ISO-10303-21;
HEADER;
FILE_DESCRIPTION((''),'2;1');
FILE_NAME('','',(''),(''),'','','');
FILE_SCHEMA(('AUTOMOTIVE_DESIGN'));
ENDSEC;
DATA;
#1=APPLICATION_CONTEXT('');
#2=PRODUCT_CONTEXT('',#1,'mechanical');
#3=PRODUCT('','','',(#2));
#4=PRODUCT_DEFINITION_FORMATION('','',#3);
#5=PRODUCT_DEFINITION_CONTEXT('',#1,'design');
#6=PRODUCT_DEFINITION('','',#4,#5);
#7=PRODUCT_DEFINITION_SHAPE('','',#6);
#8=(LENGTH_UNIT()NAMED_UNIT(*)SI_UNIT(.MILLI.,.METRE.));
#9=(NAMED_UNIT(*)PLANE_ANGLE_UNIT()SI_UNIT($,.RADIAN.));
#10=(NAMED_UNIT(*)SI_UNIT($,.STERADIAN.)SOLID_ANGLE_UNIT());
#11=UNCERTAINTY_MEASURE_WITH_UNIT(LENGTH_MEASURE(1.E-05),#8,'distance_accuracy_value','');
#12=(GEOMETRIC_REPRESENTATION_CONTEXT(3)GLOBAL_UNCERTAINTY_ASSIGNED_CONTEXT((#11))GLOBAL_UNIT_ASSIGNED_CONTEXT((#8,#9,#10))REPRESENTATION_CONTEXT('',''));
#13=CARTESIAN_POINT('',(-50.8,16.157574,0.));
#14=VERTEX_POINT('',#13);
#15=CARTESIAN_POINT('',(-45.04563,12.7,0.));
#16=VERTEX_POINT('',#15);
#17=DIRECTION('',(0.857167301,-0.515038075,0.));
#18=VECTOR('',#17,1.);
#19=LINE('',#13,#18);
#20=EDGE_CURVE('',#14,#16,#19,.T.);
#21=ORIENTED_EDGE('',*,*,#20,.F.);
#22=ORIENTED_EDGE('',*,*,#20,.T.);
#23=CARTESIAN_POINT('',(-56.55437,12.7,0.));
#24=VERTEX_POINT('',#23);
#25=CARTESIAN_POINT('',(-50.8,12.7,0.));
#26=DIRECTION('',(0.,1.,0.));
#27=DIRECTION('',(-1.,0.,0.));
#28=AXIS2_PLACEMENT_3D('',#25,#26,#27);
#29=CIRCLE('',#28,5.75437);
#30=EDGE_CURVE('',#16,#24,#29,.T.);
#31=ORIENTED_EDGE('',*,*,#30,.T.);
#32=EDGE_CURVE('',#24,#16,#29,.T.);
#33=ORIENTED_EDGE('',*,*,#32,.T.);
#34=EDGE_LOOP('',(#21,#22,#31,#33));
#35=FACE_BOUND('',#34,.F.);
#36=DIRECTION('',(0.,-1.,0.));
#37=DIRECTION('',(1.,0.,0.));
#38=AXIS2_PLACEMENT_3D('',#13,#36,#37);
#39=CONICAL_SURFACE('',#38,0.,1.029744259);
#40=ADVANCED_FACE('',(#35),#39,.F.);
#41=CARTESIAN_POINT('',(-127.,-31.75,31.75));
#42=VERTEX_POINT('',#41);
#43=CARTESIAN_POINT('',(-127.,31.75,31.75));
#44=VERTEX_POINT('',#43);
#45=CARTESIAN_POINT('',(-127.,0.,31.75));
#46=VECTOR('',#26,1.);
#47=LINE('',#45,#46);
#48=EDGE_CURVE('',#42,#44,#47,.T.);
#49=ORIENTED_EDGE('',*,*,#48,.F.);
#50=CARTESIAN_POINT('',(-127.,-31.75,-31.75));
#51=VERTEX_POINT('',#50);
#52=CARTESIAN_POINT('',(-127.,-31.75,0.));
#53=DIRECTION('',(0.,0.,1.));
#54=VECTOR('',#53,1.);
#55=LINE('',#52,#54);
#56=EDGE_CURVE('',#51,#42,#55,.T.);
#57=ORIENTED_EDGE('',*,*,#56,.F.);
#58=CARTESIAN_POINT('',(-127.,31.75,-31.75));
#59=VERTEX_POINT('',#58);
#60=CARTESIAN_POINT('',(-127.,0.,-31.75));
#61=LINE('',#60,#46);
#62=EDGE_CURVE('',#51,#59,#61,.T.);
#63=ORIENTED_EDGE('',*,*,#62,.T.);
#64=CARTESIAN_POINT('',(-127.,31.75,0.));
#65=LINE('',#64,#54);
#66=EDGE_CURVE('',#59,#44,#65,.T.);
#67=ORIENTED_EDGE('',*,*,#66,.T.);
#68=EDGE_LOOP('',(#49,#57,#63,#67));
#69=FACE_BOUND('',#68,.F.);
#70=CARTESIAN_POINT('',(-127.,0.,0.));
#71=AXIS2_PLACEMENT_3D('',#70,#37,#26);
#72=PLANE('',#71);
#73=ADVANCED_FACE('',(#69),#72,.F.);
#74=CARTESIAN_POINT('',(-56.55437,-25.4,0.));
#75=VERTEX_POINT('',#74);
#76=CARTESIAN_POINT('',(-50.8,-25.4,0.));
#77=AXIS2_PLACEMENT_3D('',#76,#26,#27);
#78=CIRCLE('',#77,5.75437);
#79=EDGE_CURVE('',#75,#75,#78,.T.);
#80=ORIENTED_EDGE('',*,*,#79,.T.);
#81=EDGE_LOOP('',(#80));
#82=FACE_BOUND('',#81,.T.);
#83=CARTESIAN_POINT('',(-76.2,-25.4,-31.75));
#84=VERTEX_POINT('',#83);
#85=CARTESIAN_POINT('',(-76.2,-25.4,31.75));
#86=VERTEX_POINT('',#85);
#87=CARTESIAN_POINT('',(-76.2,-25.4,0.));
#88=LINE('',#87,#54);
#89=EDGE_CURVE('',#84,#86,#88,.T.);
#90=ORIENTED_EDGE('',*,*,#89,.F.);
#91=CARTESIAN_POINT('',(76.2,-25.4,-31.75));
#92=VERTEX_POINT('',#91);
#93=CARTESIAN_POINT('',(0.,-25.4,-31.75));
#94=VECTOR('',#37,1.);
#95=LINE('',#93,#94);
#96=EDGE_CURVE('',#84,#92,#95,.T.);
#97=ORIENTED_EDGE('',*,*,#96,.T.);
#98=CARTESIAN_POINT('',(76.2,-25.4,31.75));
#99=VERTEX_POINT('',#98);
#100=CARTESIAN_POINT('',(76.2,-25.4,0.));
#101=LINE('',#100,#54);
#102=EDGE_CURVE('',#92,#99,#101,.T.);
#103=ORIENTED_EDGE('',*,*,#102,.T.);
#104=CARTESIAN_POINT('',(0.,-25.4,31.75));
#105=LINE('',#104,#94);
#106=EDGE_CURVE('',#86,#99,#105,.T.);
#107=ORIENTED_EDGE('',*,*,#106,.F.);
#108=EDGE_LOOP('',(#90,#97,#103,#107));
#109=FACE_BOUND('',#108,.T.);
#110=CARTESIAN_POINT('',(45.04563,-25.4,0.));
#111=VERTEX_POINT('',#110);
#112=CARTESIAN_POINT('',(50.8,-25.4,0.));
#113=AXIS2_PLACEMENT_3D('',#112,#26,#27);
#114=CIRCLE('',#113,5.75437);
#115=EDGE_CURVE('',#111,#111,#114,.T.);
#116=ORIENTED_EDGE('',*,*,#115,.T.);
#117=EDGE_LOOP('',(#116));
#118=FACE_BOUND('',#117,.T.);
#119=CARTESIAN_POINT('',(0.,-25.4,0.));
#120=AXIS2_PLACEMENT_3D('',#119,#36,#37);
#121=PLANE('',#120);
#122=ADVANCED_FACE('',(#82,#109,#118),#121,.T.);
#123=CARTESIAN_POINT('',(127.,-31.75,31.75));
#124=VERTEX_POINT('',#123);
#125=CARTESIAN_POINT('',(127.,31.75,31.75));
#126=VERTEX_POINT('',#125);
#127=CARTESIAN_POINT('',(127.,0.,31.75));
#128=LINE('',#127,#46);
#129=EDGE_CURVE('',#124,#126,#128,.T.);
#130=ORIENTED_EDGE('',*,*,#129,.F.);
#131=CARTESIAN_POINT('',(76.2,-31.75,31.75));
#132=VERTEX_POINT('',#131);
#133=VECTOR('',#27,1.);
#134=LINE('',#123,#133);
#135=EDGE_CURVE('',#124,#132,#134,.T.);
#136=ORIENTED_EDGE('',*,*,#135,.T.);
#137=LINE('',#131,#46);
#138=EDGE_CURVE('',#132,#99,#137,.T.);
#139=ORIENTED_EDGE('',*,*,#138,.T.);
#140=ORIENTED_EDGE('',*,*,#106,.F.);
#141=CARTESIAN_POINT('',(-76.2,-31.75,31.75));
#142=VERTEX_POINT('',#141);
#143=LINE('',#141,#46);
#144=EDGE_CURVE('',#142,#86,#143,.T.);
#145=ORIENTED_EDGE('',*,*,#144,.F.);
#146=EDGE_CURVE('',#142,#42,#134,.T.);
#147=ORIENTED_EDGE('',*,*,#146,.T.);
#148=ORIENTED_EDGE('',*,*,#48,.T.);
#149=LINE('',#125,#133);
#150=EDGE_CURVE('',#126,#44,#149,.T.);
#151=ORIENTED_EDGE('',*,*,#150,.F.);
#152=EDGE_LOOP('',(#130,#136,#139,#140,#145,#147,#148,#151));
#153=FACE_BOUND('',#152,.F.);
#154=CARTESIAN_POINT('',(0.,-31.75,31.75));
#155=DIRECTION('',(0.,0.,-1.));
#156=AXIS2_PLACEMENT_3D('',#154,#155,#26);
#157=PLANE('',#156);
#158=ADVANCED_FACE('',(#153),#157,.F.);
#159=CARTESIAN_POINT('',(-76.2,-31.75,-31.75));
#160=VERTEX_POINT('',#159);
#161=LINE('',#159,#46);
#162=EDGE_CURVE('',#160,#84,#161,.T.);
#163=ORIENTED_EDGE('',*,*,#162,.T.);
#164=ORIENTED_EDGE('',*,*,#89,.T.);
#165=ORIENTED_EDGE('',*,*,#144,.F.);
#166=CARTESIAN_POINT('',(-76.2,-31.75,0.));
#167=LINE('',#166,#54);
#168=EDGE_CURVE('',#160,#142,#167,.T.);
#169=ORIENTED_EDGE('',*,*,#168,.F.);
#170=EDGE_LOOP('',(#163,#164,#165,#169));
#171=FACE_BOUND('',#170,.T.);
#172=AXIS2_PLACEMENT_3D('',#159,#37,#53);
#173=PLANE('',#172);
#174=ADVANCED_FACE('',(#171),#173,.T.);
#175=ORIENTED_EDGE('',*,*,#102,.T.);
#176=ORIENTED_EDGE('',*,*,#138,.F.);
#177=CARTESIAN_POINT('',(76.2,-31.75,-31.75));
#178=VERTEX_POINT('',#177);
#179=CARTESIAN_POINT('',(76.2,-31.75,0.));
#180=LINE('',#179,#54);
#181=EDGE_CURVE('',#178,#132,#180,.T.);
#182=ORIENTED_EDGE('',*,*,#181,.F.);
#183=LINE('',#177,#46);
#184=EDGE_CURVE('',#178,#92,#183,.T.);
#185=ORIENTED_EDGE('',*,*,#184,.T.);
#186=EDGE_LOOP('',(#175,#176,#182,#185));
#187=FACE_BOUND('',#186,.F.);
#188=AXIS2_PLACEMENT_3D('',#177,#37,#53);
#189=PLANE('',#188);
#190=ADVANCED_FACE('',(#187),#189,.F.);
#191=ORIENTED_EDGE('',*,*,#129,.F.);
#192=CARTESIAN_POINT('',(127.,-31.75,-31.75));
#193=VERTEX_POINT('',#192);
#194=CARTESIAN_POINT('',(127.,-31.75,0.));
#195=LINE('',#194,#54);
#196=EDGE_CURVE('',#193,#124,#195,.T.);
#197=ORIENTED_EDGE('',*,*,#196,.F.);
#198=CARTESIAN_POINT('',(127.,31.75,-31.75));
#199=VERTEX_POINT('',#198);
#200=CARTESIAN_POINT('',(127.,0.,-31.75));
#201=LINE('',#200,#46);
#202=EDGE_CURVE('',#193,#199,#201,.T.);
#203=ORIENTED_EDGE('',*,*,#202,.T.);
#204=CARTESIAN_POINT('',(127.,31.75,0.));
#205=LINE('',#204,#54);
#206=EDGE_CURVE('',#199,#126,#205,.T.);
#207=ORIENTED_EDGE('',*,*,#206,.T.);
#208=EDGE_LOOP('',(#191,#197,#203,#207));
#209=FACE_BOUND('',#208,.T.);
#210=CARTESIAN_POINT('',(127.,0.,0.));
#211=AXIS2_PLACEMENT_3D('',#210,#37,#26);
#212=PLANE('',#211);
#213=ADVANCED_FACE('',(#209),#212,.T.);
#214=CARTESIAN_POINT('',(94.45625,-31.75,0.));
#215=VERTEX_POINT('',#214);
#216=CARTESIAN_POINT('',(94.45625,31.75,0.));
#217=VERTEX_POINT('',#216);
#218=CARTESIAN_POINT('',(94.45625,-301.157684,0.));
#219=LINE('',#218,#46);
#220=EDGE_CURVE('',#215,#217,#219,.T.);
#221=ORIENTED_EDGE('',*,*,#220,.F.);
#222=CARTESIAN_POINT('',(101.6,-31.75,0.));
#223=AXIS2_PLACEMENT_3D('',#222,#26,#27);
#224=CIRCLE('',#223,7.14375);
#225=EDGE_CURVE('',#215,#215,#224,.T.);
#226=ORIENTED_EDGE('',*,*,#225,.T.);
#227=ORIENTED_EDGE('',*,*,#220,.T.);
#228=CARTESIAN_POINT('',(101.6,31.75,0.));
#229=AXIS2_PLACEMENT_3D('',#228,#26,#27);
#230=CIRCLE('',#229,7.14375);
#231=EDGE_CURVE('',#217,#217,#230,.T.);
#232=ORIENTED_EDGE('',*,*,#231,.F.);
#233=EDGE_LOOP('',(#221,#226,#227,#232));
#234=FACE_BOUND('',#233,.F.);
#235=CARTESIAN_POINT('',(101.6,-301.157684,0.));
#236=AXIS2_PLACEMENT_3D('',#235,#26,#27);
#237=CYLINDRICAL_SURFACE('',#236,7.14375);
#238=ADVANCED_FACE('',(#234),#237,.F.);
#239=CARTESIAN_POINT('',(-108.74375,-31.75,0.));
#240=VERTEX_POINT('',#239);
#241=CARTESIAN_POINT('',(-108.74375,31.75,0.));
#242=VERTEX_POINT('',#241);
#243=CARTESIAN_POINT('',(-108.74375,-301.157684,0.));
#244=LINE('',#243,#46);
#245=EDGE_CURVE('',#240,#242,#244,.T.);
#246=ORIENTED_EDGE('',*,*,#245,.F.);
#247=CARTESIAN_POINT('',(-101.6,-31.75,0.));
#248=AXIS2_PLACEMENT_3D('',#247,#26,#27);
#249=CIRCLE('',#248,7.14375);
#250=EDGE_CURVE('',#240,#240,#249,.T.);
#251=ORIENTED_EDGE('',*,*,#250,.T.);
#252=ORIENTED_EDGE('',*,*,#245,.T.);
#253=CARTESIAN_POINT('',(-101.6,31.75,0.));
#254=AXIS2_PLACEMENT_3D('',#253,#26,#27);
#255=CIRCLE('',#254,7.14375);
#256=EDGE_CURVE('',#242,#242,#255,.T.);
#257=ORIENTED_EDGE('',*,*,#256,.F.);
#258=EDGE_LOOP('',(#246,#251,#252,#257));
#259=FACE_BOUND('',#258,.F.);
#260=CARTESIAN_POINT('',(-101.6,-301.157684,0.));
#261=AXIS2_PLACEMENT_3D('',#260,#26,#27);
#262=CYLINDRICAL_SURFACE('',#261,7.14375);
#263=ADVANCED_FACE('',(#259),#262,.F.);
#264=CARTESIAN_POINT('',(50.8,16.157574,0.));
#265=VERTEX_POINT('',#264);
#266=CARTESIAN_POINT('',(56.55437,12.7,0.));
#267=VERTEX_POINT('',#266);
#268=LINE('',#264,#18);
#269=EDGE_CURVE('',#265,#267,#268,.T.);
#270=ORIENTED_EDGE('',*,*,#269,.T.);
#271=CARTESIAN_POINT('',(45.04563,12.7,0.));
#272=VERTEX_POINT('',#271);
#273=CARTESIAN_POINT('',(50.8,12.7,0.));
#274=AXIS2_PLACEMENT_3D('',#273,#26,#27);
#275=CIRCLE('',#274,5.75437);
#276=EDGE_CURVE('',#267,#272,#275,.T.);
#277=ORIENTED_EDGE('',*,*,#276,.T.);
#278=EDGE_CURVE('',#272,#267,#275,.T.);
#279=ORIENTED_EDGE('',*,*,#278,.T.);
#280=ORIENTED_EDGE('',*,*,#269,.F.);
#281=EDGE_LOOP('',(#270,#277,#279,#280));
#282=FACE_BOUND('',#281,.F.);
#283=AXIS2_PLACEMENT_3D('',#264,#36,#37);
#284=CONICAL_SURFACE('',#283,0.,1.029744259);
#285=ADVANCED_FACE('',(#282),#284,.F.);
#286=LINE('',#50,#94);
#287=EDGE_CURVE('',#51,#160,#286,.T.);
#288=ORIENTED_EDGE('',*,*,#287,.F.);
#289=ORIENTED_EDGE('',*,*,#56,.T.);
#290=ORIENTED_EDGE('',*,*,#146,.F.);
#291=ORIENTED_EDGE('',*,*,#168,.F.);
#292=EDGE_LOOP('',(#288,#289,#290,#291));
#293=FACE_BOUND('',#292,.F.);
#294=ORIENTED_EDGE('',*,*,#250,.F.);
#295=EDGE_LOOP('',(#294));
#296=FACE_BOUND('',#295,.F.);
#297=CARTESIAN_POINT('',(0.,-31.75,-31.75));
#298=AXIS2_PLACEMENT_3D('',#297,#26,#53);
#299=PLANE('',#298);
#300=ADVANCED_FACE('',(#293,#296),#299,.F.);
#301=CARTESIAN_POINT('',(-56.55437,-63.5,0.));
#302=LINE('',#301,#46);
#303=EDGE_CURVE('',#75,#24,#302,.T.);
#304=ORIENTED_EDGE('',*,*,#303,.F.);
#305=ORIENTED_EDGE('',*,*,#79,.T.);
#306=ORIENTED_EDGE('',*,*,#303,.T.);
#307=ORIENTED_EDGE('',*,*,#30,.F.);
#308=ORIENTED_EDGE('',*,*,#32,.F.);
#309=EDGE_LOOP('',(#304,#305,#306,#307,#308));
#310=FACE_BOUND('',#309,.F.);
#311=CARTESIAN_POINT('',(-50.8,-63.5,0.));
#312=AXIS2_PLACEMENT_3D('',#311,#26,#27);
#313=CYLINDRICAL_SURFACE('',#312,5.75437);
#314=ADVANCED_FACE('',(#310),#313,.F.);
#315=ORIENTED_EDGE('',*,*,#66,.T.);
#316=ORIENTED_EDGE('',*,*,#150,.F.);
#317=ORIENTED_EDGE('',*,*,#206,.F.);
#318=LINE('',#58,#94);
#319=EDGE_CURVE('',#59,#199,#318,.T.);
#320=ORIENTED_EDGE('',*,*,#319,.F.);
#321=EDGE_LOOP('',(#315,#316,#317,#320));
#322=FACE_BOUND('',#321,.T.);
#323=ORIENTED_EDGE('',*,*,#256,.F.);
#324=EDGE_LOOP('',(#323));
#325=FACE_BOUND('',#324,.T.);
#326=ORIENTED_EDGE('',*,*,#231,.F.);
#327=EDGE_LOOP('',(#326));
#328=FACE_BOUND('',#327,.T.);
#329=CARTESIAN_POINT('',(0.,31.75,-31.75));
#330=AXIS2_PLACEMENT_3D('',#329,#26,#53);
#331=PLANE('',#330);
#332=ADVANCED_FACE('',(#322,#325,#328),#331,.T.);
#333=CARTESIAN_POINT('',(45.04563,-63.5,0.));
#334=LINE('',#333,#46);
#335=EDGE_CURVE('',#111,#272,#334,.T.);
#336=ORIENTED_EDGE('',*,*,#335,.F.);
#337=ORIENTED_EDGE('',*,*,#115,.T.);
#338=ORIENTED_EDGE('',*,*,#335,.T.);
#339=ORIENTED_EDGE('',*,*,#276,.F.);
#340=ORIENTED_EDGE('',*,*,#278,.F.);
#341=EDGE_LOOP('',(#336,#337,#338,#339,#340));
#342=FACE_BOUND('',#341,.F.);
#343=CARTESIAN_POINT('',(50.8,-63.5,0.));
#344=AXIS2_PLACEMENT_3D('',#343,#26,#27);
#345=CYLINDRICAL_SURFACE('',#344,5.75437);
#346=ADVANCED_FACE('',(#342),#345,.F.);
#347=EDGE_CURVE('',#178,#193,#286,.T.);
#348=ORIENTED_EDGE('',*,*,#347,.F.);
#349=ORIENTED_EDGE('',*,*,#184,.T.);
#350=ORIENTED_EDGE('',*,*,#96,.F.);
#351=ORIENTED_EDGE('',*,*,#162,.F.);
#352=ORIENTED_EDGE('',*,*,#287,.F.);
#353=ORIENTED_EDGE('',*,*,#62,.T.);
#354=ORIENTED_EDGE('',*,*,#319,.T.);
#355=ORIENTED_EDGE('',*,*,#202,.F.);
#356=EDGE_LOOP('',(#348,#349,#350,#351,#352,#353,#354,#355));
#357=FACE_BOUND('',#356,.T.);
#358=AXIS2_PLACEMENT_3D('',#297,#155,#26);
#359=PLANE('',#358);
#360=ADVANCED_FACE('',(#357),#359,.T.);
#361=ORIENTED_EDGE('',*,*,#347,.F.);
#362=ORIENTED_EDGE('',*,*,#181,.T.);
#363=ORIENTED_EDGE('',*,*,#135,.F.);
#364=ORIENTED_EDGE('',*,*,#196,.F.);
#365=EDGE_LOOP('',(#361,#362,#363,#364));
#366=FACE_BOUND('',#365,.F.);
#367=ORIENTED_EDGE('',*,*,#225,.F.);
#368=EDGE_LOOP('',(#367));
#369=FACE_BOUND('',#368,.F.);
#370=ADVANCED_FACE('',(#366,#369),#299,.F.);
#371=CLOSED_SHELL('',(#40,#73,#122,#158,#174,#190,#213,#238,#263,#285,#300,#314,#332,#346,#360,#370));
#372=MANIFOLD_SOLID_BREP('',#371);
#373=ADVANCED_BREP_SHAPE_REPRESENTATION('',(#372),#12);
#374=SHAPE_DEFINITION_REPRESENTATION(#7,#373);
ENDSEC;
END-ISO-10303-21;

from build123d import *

# Parameters (mm, degrees)
F0_W     = 63.5
F0_H     = 63.5
F1_DEPTH = 127
F3_D     = 14.2875
F4_W     = 152.4
F4_H     = 63.5
F5_DEPTH = 6.35
F7_D     = 11.50874
F7_DEPTH = 38.1
F7_TIP   = 3.4575743203


# Not quite as in the source:
# - a length typed as a fraction of an inch, garbled in the dataset ("3 / 203.2 mm" for 3/8 in), is restored


with BuildPart() as f1:
    # F0 (on Right) → F1 (new body, symmetric)
    with BuildSketch(Plane.YZ):
        Rectangle(F0_W, F0_H)
    extrude(amount=F1_DEPTH, both=True)

    # F3 (through all)
    with Locations(Plane.XZ.offset(31.75)):
        with Locations((-101.6, 0), (101.6, 0)):
            Hole(F3_D / 2)

    # F4 (on face) → F5 (cut)
    with BuildSketch(Plane.XZ.offset(31.75)):
        Rectangle(F4_W, F4_H)
    extrude(amount=-F5_DEPTH, mode=Mode.SUBTRACT)

    # F7
    with Locations(Plane.XZ.offset(25.4)):
        with Locations((-50.8, 0), (50.8, 0)):
            Hole(F7_D / 2, depth=F7_DEPTH)
            with Locations((0, 0, -(F7_DEPTH + F7_TIP / 2))):  # 118° drill point
                Cone(0, F7_D / 2, F7_TIP, mode=Mode.SUBTRACT)


solid = f1.part
